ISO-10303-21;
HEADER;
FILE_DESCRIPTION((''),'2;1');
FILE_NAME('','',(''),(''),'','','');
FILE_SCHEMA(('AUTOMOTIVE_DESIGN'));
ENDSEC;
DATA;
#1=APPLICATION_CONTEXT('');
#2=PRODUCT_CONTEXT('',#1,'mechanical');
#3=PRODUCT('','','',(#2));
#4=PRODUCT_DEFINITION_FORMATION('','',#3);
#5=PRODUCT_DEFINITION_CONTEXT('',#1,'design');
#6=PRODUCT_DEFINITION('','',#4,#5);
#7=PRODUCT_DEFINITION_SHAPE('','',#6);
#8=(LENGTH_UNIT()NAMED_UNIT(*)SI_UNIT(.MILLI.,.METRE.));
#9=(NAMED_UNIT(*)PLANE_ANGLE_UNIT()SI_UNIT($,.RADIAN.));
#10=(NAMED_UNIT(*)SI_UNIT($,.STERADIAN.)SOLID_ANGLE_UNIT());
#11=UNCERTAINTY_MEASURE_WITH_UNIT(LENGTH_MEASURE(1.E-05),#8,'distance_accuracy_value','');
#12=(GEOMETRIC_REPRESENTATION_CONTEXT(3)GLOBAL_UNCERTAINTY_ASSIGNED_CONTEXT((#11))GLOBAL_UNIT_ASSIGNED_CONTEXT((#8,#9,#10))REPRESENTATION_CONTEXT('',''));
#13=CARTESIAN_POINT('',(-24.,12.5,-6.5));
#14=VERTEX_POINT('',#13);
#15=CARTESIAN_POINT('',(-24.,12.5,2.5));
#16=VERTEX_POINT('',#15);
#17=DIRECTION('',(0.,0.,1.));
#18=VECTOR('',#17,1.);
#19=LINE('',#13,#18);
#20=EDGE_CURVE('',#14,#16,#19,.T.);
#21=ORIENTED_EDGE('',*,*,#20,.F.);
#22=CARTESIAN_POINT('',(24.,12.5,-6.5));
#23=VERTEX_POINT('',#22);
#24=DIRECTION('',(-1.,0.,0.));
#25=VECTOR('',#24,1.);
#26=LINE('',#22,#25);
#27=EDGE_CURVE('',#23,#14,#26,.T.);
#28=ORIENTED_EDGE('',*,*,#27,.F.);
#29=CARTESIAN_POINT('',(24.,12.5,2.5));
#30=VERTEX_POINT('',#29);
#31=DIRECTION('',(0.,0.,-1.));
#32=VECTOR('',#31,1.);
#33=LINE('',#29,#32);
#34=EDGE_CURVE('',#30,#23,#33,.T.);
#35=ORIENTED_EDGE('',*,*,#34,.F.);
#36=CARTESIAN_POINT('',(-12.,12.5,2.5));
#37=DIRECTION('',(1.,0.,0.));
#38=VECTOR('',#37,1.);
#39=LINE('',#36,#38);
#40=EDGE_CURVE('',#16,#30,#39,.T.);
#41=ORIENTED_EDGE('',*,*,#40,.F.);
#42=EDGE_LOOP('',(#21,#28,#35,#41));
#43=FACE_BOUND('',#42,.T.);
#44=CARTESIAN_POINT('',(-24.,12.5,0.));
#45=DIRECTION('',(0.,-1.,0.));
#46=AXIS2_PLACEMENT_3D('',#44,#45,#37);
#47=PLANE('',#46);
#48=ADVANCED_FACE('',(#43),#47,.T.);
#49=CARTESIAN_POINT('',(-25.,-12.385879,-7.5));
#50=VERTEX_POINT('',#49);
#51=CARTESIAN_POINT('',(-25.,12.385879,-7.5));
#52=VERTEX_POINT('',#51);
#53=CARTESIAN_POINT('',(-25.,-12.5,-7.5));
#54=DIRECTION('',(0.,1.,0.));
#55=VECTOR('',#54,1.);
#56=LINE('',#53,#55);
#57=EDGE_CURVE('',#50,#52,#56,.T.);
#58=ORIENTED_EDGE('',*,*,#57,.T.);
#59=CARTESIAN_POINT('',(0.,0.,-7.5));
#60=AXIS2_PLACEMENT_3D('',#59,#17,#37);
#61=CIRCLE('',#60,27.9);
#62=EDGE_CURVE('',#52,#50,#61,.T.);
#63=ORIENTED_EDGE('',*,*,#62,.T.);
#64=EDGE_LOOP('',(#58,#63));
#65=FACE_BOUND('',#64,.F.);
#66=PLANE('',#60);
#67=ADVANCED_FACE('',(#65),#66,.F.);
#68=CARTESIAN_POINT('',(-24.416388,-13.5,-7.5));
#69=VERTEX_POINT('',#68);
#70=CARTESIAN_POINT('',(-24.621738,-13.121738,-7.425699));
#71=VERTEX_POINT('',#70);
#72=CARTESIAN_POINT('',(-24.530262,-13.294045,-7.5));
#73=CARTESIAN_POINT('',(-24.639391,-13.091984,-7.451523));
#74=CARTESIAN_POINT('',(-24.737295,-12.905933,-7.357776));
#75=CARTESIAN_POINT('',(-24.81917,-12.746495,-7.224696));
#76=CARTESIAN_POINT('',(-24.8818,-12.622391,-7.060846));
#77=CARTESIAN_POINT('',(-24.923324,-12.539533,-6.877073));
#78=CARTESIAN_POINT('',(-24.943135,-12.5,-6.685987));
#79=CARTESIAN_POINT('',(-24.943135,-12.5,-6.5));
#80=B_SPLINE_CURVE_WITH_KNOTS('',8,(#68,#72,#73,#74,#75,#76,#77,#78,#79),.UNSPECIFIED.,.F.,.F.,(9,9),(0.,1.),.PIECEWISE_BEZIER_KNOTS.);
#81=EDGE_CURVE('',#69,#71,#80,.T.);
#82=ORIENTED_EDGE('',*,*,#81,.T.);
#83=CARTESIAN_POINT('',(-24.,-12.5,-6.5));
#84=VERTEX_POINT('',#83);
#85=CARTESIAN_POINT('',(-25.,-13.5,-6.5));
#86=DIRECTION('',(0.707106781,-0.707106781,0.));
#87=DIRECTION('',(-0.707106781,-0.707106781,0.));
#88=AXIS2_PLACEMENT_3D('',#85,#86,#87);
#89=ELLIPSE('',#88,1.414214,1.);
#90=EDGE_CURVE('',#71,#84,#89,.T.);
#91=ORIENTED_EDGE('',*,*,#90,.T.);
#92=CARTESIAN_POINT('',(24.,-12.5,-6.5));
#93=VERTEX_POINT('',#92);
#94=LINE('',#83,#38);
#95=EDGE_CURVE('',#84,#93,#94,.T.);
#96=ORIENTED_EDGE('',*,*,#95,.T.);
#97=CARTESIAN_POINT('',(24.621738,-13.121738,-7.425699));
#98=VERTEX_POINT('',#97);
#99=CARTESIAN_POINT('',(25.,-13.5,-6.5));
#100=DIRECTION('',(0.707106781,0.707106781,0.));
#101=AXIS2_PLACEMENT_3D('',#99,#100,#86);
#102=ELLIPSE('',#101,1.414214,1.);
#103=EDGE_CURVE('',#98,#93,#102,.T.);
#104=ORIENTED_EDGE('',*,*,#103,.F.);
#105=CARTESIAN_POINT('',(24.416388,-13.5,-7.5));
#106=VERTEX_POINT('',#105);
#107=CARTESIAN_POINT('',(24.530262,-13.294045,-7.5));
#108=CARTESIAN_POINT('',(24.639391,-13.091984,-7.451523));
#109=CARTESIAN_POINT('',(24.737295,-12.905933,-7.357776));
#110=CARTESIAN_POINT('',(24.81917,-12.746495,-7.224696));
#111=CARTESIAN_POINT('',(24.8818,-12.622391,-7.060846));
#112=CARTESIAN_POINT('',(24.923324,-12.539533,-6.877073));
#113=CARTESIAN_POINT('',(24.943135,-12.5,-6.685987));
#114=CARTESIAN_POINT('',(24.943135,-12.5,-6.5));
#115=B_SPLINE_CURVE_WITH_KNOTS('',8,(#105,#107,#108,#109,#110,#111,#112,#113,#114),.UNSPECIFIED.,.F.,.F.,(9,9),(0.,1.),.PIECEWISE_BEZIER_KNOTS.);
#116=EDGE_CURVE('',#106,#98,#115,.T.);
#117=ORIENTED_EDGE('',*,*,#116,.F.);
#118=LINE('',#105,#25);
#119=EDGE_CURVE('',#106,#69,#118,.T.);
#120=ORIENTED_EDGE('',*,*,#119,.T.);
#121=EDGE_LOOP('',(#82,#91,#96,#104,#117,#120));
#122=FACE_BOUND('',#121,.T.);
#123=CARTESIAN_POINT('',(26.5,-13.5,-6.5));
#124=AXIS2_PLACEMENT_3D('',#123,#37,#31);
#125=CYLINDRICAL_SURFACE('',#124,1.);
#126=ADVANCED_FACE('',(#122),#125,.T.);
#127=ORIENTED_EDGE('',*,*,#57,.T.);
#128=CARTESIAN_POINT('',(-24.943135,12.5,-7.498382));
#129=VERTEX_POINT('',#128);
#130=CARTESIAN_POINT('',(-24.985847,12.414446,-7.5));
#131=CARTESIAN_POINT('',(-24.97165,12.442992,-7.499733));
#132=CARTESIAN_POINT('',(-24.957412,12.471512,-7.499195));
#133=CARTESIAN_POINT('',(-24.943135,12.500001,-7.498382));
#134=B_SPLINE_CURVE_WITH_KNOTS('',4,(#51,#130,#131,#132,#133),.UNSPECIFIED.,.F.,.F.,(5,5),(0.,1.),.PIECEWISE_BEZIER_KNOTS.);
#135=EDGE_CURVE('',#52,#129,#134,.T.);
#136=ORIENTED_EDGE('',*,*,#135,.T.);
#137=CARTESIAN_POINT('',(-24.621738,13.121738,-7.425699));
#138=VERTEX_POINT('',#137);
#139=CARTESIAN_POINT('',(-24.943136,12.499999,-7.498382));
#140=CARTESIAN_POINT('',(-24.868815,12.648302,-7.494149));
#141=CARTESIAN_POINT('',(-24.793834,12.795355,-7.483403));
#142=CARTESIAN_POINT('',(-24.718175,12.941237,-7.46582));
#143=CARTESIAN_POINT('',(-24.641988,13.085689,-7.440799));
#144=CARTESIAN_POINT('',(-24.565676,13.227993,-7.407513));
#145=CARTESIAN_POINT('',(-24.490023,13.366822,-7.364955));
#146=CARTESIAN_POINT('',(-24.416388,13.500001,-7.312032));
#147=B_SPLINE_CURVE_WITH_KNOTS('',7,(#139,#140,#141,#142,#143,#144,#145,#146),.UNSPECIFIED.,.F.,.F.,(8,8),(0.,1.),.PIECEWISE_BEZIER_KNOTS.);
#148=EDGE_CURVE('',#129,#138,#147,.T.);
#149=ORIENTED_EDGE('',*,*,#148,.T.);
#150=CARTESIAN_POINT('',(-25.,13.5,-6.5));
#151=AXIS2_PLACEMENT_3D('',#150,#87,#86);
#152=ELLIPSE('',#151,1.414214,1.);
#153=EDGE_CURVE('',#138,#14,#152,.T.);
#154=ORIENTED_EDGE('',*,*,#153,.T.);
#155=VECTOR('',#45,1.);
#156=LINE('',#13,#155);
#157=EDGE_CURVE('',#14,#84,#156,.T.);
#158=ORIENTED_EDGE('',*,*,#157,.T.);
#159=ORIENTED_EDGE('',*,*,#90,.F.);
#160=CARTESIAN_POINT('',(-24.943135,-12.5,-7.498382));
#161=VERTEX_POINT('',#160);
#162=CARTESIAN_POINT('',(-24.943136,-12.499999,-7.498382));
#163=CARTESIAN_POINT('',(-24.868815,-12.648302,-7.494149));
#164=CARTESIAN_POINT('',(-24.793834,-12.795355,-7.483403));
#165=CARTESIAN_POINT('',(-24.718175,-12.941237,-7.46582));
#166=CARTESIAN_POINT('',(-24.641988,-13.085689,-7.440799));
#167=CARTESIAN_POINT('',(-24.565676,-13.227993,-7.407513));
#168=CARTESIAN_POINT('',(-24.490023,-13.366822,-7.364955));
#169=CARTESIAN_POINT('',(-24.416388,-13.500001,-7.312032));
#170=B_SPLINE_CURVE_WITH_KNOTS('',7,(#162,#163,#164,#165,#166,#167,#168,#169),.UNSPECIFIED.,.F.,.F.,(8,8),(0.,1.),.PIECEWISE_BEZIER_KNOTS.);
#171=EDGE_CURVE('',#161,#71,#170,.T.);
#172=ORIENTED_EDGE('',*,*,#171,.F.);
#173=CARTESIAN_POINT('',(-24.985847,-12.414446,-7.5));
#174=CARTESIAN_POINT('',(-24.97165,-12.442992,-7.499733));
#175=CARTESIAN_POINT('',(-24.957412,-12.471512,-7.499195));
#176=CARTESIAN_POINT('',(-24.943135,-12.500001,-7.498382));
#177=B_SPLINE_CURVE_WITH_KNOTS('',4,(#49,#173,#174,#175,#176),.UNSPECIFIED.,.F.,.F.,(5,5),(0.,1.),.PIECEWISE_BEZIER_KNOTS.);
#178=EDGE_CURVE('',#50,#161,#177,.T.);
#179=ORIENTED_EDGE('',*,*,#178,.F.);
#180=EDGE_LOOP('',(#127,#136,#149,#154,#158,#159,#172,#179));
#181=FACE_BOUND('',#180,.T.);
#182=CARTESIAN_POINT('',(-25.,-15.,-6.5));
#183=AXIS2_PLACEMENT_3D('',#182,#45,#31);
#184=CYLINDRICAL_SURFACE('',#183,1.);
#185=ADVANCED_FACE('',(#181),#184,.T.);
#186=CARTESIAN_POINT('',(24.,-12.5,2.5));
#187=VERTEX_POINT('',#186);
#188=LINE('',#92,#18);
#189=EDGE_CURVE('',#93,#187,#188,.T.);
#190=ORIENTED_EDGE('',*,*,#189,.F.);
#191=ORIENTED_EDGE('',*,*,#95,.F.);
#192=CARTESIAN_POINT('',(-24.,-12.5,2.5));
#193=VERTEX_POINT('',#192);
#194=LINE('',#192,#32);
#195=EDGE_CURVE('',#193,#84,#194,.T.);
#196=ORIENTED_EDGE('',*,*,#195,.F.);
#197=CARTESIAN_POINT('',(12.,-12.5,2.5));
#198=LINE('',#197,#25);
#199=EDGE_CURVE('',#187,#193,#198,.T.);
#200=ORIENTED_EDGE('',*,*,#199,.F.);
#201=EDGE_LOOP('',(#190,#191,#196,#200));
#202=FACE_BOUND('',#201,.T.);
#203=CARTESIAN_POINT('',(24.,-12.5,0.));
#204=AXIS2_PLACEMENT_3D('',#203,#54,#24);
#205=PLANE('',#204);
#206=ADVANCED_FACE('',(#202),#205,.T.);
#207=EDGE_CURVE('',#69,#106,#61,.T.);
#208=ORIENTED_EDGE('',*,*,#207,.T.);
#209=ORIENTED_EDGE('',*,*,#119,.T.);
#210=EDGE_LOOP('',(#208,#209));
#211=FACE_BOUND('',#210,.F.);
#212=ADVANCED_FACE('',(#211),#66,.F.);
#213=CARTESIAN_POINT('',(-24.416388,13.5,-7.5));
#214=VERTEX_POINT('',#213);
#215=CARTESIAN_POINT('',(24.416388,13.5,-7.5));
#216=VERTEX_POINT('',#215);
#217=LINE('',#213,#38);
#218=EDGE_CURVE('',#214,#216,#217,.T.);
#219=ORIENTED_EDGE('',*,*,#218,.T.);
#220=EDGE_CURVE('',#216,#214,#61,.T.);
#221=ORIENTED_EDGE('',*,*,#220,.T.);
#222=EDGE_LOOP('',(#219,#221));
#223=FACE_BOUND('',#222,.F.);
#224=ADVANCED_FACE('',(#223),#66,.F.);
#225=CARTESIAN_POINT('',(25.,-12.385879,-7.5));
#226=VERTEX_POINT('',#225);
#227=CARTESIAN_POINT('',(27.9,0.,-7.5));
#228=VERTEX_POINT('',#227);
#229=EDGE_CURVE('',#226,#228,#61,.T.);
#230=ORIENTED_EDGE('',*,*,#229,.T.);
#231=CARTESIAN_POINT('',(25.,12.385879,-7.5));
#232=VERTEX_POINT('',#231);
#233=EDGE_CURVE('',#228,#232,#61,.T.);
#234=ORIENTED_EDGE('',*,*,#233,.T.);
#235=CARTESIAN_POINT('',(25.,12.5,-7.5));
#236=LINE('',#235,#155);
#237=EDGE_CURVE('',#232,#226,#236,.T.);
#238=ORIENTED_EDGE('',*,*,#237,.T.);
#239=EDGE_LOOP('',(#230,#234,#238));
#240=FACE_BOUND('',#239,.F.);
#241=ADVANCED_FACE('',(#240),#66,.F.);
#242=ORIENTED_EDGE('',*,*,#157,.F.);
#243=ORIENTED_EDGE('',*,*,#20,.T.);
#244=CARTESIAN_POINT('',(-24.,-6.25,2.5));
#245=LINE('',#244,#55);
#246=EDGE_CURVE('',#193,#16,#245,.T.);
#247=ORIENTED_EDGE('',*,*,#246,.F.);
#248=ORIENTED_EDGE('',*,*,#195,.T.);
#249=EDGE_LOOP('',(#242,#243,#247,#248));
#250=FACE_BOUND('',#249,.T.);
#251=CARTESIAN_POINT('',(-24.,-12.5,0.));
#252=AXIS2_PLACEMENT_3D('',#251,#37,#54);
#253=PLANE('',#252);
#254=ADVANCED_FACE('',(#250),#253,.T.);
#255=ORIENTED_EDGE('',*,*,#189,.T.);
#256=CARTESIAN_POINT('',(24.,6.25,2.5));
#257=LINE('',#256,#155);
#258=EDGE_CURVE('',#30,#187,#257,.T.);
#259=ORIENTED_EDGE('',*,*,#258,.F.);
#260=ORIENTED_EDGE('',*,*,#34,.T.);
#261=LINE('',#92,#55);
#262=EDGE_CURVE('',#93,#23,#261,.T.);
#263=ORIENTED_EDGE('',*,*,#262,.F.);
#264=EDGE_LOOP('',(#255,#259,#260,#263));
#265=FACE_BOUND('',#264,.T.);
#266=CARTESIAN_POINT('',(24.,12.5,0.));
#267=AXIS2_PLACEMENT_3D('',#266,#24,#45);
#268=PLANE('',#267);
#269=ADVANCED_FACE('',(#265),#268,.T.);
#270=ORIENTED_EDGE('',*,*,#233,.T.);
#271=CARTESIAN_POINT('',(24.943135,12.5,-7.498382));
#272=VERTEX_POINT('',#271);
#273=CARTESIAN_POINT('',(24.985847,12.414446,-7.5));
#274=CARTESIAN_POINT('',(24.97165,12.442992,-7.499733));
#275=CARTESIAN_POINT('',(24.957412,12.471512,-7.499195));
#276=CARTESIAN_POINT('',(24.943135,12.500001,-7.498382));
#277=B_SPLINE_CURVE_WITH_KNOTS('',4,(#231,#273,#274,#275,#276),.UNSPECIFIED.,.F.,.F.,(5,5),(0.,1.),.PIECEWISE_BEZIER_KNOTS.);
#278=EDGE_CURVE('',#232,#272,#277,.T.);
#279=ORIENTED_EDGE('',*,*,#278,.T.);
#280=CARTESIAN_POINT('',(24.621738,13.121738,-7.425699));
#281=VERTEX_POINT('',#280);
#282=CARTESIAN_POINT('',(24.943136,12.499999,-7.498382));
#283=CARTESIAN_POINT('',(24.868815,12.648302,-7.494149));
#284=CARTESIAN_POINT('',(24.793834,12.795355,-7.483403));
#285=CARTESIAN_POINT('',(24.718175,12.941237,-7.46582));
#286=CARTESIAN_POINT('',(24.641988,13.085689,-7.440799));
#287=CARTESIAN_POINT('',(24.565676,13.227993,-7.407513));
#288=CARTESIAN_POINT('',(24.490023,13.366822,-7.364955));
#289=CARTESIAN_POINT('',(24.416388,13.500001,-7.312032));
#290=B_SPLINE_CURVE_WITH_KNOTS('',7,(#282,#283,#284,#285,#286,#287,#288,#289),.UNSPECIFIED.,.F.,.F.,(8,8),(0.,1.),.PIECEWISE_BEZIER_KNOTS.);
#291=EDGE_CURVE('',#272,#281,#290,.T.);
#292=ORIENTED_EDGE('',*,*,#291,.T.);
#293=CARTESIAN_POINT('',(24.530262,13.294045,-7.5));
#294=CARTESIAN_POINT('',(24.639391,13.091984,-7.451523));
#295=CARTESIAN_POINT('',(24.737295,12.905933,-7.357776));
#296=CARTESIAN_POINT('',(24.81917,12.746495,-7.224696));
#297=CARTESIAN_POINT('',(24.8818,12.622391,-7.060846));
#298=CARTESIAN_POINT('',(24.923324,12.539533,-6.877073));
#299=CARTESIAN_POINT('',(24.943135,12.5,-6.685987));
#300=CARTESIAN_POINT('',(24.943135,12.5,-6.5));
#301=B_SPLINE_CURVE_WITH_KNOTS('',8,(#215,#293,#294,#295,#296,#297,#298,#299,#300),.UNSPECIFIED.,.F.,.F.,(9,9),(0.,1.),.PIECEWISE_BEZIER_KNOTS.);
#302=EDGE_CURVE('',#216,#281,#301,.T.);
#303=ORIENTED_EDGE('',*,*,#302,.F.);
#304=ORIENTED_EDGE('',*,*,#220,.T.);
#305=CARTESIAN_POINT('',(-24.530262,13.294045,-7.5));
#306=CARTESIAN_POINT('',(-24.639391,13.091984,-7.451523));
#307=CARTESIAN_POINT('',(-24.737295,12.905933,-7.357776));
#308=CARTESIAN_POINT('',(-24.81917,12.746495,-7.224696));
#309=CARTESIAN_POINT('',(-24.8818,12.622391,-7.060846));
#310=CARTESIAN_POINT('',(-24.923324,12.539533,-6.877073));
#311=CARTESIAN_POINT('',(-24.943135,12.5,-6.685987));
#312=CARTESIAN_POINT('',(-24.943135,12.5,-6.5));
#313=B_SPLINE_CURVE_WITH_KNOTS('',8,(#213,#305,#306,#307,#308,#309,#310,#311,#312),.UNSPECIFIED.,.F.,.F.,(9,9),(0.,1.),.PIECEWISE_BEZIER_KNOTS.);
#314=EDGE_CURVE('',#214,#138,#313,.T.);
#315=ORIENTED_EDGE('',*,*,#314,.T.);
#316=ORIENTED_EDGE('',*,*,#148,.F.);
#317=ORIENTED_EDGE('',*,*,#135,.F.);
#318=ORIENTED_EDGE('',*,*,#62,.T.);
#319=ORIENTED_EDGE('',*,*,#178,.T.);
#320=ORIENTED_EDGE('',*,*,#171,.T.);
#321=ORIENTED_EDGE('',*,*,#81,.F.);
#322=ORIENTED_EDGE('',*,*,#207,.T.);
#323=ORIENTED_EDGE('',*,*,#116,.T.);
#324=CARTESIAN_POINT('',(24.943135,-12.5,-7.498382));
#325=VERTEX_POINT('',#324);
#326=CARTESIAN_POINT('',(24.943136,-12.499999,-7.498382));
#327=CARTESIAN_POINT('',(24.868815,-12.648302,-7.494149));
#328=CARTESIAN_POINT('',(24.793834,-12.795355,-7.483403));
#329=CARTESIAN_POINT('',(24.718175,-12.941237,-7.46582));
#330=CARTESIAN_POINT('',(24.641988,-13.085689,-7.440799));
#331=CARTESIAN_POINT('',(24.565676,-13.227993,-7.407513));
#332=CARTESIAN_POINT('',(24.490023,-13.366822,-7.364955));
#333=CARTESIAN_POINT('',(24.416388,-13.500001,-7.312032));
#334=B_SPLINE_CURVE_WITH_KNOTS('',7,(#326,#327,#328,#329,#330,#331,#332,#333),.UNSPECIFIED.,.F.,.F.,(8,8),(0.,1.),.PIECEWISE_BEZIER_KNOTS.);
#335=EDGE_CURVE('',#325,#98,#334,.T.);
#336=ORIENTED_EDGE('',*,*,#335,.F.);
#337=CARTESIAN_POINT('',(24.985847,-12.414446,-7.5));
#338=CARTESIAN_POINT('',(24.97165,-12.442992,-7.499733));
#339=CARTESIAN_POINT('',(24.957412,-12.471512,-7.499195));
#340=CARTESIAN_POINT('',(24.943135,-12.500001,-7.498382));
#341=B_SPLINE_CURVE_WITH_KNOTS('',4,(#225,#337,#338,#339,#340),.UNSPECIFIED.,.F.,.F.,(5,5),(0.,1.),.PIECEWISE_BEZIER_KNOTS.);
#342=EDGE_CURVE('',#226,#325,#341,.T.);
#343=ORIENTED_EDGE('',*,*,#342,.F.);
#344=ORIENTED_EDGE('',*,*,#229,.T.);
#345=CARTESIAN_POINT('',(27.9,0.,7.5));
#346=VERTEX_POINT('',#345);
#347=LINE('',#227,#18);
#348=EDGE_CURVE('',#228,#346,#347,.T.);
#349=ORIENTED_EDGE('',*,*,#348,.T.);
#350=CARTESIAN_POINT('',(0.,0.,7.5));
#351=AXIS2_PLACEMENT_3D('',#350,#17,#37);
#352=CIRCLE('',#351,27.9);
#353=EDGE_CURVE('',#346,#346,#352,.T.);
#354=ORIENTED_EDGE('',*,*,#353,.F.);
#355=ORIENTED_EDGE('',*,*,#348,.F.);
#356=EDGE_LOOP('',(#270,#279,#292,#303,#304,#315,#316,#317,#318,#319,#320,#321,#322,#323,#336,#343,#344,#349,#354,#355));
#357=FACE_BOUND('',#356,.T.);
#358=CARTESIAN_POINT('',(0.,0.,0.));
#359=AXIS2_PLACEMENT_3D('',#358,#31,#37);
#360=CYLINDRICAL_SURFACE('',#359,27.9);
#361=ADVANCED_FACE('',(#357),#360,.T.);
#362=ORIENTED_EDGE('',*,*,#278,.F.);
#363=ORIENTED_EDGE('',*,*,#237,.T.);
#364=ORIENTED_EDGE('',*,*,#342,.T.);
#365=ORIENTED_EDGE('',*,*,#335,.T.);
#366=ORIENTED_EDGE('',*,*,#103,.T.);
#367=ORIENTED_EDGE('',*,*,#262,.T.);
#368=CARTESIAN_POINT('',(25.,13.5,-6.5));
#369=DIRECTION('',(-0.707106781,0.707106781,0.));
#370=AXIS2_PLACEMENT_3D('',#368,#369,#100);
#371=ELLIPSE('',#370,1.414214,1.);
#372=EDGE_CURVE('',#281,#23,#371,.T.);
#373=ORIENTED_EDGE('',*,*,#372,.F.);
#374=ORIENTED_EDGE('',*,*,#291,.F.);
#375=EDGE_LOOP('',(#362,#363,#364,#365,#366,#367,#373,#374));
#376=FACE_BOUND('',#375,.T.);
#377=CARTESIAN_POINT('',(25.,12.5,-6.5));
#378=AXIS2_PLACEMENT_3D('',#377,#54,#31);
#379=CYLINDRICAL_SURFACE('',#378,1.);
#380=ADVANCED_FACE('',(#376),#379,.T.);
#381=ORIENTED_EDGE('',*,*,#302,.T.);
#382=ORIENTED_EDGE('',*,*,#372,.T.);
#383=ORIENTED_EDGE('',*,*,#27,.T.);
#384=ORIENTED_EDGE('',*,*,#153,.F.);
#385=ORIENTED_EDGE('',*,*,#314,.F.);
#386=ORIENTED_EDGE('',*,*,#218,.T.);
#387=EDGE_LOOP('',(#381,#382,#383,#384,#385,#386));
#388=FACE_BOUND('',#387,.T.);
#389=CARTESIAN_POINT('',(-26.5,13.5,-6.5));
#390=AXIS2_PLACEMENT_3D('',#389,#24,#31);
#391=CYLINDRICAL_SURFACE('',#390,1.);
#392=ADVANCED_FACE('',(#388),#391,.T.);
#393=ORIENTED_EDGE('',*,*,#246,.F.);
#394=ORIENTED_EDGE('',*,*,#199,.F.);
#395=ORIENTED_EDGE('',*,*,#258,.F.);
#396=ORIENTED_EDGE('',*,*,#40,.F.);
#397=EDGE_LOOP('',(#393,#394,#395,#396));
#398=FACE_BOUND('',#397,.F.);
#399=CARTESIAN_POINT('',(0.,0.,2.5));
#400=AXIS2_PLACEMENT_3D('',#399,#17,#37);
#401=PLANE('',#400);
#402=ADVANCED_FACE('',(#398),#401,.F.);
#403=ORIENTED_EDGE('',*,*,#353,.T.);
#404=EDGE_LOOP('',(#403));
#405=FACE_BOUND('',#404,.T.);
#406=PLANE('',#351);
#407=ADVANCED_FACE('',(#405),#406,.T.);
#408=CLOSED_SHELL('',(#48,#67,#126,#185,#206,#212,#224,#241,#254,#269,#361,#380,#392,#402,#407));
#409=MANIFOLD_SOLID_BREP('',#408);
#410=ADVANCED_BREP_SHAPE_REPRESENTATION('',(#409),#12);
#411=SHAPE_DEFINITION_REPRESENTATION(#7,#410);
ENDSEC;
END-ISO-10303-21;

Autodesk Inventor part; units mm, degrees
ref_plane "YZ Plane" through (0, 0, 0) normal (1, 0, 0) x (0, 1, 0)
ref_plane "XZ Plane" through (0, 0, 0) normal (0, 1, 0) x (-1, 0, 0)
ref_plane "XY Plane" through (0, 0, 0) normal (0, 0, 1) x (1, 0, 0)
sketch "Sketch1" plane through (0, 0, 0) normal (0, 0, 1) x (1, 0, 0)
  circle A0 centre (0, 0) radius 27.9
  line L0 (-24, 12.5) -> (24, 12.5)
  line L1 (24, 12.5) -> (24, -12.5)
  line L2 (24, -12.5) -> (-24, -12.5)
  line L3 (-24, -12.5) -> (-24, 12.5)
  dimension "d0" = 55.8
  dimension "d1" = 48
  dimension "d2" = 24
  dimension "d3" = 25
  dimension "d4" = 12.5
extrude "Extrusion1" add sketch "Sketch1" along normal mid plane 15
sketch "Sketch2" plane through (0, 0, 7.5) normal (0, 0, 1) x (1, 0, 0)
  circle A0 centre (0, 0) radius 27.9
  dimension "d10" = 55.8
extrude "Extrusion2" add sketch "Sketch2" against normal blind 5
fillet "Fillet1" radius 1 4 edges at (-24, 0, -7.5) (0, 12.5, -7.5) (0, -12.5, -7.5) (24, 0, -7.5)
equation "\"d2\" = 0.5 * d1"
equation "\"d4\" = 0.5 * d3"
properties part number "soporte base pila"
